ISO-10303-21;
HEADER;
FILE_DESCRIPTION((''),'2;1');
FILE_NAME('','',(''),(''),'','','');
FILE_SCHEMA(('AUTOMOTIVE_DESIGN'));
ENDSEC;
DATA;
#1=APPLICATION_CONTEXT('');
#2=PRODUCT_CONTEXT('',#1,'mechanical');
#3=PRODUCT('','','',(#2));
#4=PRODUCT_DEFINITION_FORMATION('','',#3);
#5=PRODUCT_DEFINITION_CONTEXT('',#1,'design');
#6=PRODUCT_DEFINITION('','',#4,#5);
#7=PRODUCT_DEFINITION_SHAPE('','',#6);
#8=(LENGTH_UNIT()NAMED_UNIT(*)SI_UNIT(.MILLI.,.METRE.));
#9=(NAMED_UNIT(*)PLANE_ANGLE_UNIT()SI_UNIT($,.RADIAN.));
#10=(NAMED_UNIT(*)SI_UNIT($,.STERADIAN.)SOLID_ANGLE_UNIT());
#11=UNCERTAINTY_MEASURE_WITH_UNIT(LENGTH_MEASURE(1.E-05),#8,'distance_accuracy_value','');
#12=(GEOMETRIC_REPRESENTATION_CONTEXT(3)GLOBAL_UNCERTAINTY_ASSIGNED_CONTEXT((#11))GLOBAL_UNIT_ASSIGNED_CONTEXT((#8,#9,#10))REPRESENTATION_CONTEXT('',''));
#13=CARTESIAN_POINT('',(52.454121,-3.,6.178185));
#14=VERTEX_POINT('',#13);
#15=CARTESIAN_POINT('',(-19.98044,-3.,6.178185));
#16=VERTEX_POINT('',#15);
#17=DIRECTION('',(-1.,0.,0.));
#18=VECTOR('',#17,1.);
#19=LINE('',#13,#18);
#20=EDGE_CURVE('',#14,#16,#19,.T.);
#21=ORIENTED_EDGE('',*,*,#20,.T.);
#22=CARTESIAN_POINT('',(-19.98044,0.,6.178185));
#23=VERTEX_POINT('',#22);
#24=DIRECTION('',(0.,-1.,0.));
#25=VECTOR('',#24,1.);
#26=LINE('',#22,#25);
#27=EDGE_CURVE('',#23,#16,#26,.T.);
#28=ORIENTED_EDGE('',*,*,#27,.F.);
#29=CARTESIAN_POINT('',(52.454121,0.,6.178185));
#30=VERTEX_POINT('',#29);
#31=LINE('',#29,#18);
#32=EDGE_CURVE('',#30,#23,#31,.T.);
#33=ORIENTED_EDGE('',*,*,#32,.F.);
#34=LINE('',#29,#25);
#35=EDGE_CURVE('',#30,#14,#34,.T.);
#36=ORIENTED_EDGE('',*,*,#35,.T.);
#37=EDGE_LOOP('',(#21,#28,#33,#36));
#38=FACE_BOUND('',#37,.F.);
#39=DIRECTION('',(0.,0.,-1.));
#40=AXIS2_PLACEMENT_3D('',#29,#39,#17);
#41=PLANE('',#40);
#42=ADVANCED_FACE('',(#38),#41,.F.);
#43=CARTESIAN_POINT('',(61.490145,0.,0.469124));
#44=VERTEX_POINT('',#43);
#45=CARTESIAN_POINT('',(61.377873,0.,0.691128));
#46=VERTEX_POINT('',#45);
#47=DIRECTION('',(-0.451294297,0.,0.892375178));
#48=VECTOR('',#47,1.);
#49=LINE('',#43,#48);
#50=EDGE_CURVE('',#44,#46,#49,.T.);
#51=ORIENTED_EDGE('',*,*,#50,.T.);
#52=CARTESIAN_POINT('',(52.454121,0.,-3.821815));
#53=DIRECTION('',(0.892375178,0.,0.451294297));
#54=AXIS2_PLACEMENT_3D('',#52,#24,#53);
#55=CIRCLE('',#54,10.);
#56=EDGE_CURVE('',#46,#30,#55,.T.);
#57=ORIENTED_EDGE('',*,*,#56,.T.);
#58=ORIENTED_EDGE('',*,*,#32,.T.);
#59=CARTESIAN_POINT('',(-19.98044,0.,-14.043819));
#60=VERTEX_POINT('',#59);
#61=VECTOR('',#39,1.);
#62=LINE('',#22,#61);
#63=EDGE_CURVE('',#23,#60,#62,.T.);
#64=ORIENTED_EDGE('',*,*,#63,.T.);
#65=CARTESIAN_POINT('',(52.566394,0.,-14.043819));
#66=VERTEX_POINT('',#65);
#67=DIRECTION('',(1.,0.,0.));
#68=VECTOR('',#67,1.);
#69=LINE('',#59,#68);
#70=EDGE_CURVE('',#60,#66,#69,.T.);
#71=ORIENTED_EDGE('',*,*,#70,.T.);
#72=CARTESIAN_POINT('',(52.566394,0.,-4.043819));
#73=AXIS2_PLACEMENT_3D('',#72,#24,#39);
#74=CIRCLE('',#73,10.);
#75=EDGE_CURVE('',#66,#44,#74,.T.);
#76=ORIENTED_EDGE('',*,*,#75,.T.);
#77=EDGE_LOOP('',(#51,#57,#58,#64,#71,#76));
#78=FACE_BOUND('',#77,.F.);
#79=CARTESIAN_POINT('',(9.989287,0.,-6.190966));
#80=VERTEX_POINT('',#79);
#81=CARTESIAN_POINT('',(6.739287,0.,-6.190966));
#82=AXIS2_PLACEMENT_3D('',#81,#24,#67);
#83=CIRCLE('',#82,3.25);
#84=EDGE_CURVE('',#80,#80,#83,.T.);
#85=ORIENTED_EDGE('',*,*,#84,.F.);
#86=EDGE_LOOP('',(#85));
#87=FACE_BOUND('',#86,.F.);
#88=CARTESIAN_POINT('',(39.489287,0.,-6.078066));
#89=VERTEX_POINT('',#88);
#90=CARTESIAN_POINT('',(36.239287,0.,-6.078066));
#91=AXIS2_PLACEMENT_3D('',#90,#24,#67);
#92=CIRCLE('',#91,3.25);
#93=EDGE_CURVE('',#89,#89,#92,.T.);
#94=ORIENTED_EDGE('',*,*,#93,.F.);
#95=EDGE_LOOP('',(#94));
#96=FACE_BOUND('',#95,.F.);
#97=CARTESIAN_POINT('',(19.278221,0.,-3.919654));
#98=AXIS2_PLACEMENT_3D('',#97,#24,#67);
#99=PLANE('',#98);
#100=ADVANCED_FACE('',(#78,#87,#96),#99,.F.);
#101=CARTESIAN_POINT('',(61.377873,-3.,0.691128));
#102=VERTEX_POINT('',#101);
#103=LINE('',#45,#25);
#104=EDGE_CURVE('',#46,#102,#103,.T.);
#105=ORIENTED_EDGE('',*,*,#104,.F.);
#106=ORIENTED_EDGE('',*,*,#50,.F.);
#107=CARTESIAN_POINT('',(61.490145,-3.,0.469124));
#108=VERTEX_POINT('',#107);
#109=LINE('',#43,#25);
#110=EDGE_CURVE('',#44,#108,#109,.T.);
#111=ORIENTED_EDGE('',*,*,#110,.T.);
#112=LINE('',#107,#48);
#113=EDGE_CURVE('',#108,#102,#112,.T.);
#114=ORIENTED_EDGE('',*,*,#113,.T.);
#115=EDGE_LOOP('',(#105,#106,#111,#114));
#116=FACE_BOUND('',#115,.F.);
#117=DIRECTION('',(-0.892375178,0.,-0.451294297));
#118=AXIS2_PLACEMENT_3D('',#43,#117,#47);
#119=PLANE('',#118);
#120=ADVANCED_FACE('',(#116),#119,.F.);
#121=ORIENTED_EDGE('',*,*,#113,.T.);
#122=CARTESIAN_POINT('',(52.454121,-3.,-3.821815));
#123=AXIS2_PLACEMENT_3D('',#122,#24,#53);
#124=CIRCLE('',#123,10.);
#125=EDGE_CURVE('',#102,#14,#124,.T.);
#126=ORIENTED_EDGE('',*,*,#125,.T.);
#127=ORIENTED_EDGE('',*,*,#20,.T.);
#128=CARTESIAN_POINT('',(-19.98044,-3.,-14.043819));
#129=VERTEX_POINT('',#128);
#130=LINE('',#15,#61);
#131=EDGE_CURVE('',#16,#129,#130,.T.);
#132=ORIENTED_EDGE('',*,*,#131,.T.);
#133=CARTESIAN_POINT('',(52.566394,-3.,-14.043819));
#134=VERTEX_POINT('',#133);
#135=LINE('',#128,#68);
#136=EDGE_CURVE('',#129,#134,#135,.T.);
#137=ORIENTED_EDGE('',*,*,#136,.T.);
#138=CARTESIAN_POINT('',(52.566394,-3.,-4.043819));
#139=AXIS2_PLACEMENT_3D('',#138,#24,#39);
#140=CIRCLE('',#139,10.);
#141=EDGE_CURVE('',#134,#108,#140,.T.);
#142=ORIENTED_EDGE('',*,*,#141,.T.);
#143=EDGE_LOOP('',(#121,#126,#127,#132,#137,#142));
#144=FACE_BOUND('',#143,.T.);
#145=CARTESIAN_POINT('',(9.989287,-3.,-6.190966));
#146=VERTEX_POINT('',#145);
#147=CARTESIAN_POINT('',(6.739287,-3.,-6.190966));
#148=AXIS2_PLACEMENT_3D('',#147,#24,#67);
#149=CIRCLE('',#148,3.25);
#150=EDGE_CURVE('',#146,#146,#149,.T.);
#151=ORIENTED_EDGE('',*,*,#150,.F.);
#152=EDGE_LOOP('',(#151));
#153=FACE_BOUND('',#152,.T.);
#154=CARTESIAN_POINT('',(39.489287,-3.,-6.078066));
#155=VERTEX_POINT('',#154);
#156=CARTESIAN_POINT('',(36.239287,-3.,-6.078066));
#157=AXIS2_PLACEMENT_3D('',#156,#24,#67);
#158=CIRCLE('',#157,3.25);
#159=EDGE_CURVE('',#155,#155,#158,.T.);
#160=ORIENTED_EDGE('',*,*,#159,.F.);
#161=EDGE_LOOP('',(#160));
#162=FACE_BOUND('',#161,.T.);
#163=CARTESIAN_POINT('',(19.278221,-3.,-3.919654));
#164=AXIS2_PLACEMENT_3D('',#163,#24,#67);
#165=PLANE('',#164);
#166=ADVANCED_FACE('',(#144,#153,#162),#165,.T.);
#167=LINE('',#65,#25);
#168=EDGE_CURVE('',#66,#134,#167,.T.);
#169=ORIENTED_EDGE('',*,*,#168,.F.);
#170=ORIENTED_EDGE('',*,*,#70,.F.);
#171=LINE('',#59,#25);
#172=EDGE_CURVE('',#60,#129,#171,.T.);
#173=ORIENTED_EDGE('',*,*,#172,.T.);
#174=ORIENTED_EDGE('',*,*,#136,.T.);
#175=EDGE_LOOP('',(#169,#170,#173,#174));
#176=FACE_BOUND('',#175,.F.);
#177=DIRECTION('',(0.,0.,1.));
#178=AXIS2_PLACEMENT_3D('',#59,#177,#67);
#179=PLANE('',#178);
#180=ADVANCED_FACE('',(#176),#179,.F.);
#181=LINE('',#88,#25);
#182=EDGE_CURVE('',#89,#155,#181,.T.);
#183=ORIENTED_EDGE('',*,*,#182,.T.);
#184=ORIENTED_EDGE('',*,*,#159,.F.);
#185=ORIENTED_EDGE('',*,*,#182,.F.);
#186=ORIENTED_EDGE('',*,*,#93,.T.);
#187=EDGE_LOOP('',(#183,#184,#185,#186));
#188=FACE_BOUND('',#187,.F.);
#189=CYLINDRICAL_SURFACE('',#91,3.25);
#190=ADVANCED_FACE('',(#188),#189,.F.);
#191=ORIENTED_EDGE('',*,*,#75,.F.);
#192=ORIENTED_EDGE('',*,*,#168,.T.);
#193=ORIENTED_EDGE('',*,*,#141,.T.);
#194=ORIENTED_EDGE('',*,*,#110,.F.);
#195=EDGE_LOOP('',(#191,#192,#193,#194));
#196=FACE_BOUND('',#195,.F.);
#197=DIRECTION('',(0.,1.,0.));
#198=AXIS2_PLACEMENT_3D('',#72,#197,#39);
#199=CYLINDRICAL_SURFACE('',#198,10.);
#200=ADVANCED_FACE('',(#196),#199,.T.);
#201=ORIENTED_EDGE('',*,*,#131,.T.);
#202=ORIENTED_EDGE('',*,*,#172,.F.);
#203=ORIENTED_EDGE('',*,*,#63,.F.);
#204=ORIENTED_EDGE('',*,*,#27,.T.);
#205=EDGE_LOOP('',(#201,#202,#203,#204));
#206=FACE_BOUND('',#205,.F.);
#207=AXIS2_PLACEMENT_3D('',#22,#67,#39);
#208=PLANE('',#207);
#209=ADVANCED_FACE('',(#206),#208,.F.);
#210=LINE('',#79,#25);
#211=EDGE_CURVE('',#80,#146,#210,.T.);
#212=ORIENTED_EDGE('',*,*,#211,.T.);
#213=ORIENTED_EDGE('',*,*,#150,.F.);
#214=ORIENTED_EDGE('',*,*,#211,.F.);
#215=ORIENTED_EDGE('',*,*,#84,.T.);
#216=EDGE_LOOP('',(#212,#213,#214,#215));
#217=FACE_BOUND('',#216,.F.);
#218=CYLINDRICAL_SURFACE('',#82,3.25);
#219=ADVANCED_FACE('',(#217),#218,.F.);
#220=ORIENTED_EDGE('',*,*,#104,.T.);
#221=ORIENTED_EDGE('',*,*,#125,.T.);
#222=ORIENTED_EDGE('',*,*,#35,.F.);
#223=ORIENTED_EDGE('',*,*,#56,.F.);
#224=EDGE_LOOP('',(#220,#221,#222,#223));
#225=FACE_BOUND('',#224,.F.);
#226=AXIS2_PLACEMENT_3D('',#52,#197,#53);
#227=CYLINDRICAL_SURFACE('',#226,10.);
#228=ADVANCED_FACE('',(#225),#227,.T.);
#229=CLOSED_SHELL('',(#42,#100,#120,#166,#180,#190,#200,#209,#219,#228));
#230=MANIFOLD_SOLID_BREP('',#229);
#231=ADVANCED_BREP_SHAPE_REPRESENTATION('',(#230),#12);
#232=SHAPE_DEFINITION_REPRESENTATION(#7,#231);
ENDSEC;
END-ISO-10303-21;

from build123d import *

# Parameters (mm, degrees)
F1_DEPTH       = 3
F3_D           = 3.3
F3_DEPTH       = 14.4
F3_CBORE_D     = 6.5
F3_CBORE_DEPTH = 3
F3_TIP         = 0.9914200214


# Not quite as in the source:
# - a feature names something its author has since deleted; it is built from what else it names


with BuildPart() as f1:
    # F0 (on Front) → F1 (new body)
    with BuildSketch(Plane.XZ):
        with BuildLine():
            Line((52.4541210128, 6.1781848239), (-19.9804399163, 6.1781848239))
            Line((-19.9804399163, 6.1781848239), (-19.9804399163, -14.0438194092))
            Line((-19.9804399163, -14.0438194092), (52.5663935712, -14.0438194092))
            ThreePointArc((52.5663935712, -14.0438194092), (61.0848860922, -9.2816896986), (61.4901453485, 0.469123557))
            Line((61.4901453485, 0.469123557), (61.3778727901, 0.6911277901))
            ThreePointArc((61.3778727901, 0.6911277901), (57.6919913022, 4.696677345), (52.4541210128, 6.1781848239))
        make_face()
    extrude(amount=F1_DEPTH)

    # F3
    with Locations(Plane.XZ.offset(3)):
        with Locations((36.2392867059, -6.078066061), (6.7392867059, -6.1909663491)):
            CounterBoreHole(F3_D / 2, F3_CBORE_D / 2, F3_CBORE_DEPTH, depth=F3_DEPTH)
            with Locations((0, 0, -(F3_DEPTH + F3_TIP / 2))):  # 118° drill point
                Cone(0, F3_D / 2, F3_TIP, mode=Mode.SUBTRACT)


solid = f1.part
